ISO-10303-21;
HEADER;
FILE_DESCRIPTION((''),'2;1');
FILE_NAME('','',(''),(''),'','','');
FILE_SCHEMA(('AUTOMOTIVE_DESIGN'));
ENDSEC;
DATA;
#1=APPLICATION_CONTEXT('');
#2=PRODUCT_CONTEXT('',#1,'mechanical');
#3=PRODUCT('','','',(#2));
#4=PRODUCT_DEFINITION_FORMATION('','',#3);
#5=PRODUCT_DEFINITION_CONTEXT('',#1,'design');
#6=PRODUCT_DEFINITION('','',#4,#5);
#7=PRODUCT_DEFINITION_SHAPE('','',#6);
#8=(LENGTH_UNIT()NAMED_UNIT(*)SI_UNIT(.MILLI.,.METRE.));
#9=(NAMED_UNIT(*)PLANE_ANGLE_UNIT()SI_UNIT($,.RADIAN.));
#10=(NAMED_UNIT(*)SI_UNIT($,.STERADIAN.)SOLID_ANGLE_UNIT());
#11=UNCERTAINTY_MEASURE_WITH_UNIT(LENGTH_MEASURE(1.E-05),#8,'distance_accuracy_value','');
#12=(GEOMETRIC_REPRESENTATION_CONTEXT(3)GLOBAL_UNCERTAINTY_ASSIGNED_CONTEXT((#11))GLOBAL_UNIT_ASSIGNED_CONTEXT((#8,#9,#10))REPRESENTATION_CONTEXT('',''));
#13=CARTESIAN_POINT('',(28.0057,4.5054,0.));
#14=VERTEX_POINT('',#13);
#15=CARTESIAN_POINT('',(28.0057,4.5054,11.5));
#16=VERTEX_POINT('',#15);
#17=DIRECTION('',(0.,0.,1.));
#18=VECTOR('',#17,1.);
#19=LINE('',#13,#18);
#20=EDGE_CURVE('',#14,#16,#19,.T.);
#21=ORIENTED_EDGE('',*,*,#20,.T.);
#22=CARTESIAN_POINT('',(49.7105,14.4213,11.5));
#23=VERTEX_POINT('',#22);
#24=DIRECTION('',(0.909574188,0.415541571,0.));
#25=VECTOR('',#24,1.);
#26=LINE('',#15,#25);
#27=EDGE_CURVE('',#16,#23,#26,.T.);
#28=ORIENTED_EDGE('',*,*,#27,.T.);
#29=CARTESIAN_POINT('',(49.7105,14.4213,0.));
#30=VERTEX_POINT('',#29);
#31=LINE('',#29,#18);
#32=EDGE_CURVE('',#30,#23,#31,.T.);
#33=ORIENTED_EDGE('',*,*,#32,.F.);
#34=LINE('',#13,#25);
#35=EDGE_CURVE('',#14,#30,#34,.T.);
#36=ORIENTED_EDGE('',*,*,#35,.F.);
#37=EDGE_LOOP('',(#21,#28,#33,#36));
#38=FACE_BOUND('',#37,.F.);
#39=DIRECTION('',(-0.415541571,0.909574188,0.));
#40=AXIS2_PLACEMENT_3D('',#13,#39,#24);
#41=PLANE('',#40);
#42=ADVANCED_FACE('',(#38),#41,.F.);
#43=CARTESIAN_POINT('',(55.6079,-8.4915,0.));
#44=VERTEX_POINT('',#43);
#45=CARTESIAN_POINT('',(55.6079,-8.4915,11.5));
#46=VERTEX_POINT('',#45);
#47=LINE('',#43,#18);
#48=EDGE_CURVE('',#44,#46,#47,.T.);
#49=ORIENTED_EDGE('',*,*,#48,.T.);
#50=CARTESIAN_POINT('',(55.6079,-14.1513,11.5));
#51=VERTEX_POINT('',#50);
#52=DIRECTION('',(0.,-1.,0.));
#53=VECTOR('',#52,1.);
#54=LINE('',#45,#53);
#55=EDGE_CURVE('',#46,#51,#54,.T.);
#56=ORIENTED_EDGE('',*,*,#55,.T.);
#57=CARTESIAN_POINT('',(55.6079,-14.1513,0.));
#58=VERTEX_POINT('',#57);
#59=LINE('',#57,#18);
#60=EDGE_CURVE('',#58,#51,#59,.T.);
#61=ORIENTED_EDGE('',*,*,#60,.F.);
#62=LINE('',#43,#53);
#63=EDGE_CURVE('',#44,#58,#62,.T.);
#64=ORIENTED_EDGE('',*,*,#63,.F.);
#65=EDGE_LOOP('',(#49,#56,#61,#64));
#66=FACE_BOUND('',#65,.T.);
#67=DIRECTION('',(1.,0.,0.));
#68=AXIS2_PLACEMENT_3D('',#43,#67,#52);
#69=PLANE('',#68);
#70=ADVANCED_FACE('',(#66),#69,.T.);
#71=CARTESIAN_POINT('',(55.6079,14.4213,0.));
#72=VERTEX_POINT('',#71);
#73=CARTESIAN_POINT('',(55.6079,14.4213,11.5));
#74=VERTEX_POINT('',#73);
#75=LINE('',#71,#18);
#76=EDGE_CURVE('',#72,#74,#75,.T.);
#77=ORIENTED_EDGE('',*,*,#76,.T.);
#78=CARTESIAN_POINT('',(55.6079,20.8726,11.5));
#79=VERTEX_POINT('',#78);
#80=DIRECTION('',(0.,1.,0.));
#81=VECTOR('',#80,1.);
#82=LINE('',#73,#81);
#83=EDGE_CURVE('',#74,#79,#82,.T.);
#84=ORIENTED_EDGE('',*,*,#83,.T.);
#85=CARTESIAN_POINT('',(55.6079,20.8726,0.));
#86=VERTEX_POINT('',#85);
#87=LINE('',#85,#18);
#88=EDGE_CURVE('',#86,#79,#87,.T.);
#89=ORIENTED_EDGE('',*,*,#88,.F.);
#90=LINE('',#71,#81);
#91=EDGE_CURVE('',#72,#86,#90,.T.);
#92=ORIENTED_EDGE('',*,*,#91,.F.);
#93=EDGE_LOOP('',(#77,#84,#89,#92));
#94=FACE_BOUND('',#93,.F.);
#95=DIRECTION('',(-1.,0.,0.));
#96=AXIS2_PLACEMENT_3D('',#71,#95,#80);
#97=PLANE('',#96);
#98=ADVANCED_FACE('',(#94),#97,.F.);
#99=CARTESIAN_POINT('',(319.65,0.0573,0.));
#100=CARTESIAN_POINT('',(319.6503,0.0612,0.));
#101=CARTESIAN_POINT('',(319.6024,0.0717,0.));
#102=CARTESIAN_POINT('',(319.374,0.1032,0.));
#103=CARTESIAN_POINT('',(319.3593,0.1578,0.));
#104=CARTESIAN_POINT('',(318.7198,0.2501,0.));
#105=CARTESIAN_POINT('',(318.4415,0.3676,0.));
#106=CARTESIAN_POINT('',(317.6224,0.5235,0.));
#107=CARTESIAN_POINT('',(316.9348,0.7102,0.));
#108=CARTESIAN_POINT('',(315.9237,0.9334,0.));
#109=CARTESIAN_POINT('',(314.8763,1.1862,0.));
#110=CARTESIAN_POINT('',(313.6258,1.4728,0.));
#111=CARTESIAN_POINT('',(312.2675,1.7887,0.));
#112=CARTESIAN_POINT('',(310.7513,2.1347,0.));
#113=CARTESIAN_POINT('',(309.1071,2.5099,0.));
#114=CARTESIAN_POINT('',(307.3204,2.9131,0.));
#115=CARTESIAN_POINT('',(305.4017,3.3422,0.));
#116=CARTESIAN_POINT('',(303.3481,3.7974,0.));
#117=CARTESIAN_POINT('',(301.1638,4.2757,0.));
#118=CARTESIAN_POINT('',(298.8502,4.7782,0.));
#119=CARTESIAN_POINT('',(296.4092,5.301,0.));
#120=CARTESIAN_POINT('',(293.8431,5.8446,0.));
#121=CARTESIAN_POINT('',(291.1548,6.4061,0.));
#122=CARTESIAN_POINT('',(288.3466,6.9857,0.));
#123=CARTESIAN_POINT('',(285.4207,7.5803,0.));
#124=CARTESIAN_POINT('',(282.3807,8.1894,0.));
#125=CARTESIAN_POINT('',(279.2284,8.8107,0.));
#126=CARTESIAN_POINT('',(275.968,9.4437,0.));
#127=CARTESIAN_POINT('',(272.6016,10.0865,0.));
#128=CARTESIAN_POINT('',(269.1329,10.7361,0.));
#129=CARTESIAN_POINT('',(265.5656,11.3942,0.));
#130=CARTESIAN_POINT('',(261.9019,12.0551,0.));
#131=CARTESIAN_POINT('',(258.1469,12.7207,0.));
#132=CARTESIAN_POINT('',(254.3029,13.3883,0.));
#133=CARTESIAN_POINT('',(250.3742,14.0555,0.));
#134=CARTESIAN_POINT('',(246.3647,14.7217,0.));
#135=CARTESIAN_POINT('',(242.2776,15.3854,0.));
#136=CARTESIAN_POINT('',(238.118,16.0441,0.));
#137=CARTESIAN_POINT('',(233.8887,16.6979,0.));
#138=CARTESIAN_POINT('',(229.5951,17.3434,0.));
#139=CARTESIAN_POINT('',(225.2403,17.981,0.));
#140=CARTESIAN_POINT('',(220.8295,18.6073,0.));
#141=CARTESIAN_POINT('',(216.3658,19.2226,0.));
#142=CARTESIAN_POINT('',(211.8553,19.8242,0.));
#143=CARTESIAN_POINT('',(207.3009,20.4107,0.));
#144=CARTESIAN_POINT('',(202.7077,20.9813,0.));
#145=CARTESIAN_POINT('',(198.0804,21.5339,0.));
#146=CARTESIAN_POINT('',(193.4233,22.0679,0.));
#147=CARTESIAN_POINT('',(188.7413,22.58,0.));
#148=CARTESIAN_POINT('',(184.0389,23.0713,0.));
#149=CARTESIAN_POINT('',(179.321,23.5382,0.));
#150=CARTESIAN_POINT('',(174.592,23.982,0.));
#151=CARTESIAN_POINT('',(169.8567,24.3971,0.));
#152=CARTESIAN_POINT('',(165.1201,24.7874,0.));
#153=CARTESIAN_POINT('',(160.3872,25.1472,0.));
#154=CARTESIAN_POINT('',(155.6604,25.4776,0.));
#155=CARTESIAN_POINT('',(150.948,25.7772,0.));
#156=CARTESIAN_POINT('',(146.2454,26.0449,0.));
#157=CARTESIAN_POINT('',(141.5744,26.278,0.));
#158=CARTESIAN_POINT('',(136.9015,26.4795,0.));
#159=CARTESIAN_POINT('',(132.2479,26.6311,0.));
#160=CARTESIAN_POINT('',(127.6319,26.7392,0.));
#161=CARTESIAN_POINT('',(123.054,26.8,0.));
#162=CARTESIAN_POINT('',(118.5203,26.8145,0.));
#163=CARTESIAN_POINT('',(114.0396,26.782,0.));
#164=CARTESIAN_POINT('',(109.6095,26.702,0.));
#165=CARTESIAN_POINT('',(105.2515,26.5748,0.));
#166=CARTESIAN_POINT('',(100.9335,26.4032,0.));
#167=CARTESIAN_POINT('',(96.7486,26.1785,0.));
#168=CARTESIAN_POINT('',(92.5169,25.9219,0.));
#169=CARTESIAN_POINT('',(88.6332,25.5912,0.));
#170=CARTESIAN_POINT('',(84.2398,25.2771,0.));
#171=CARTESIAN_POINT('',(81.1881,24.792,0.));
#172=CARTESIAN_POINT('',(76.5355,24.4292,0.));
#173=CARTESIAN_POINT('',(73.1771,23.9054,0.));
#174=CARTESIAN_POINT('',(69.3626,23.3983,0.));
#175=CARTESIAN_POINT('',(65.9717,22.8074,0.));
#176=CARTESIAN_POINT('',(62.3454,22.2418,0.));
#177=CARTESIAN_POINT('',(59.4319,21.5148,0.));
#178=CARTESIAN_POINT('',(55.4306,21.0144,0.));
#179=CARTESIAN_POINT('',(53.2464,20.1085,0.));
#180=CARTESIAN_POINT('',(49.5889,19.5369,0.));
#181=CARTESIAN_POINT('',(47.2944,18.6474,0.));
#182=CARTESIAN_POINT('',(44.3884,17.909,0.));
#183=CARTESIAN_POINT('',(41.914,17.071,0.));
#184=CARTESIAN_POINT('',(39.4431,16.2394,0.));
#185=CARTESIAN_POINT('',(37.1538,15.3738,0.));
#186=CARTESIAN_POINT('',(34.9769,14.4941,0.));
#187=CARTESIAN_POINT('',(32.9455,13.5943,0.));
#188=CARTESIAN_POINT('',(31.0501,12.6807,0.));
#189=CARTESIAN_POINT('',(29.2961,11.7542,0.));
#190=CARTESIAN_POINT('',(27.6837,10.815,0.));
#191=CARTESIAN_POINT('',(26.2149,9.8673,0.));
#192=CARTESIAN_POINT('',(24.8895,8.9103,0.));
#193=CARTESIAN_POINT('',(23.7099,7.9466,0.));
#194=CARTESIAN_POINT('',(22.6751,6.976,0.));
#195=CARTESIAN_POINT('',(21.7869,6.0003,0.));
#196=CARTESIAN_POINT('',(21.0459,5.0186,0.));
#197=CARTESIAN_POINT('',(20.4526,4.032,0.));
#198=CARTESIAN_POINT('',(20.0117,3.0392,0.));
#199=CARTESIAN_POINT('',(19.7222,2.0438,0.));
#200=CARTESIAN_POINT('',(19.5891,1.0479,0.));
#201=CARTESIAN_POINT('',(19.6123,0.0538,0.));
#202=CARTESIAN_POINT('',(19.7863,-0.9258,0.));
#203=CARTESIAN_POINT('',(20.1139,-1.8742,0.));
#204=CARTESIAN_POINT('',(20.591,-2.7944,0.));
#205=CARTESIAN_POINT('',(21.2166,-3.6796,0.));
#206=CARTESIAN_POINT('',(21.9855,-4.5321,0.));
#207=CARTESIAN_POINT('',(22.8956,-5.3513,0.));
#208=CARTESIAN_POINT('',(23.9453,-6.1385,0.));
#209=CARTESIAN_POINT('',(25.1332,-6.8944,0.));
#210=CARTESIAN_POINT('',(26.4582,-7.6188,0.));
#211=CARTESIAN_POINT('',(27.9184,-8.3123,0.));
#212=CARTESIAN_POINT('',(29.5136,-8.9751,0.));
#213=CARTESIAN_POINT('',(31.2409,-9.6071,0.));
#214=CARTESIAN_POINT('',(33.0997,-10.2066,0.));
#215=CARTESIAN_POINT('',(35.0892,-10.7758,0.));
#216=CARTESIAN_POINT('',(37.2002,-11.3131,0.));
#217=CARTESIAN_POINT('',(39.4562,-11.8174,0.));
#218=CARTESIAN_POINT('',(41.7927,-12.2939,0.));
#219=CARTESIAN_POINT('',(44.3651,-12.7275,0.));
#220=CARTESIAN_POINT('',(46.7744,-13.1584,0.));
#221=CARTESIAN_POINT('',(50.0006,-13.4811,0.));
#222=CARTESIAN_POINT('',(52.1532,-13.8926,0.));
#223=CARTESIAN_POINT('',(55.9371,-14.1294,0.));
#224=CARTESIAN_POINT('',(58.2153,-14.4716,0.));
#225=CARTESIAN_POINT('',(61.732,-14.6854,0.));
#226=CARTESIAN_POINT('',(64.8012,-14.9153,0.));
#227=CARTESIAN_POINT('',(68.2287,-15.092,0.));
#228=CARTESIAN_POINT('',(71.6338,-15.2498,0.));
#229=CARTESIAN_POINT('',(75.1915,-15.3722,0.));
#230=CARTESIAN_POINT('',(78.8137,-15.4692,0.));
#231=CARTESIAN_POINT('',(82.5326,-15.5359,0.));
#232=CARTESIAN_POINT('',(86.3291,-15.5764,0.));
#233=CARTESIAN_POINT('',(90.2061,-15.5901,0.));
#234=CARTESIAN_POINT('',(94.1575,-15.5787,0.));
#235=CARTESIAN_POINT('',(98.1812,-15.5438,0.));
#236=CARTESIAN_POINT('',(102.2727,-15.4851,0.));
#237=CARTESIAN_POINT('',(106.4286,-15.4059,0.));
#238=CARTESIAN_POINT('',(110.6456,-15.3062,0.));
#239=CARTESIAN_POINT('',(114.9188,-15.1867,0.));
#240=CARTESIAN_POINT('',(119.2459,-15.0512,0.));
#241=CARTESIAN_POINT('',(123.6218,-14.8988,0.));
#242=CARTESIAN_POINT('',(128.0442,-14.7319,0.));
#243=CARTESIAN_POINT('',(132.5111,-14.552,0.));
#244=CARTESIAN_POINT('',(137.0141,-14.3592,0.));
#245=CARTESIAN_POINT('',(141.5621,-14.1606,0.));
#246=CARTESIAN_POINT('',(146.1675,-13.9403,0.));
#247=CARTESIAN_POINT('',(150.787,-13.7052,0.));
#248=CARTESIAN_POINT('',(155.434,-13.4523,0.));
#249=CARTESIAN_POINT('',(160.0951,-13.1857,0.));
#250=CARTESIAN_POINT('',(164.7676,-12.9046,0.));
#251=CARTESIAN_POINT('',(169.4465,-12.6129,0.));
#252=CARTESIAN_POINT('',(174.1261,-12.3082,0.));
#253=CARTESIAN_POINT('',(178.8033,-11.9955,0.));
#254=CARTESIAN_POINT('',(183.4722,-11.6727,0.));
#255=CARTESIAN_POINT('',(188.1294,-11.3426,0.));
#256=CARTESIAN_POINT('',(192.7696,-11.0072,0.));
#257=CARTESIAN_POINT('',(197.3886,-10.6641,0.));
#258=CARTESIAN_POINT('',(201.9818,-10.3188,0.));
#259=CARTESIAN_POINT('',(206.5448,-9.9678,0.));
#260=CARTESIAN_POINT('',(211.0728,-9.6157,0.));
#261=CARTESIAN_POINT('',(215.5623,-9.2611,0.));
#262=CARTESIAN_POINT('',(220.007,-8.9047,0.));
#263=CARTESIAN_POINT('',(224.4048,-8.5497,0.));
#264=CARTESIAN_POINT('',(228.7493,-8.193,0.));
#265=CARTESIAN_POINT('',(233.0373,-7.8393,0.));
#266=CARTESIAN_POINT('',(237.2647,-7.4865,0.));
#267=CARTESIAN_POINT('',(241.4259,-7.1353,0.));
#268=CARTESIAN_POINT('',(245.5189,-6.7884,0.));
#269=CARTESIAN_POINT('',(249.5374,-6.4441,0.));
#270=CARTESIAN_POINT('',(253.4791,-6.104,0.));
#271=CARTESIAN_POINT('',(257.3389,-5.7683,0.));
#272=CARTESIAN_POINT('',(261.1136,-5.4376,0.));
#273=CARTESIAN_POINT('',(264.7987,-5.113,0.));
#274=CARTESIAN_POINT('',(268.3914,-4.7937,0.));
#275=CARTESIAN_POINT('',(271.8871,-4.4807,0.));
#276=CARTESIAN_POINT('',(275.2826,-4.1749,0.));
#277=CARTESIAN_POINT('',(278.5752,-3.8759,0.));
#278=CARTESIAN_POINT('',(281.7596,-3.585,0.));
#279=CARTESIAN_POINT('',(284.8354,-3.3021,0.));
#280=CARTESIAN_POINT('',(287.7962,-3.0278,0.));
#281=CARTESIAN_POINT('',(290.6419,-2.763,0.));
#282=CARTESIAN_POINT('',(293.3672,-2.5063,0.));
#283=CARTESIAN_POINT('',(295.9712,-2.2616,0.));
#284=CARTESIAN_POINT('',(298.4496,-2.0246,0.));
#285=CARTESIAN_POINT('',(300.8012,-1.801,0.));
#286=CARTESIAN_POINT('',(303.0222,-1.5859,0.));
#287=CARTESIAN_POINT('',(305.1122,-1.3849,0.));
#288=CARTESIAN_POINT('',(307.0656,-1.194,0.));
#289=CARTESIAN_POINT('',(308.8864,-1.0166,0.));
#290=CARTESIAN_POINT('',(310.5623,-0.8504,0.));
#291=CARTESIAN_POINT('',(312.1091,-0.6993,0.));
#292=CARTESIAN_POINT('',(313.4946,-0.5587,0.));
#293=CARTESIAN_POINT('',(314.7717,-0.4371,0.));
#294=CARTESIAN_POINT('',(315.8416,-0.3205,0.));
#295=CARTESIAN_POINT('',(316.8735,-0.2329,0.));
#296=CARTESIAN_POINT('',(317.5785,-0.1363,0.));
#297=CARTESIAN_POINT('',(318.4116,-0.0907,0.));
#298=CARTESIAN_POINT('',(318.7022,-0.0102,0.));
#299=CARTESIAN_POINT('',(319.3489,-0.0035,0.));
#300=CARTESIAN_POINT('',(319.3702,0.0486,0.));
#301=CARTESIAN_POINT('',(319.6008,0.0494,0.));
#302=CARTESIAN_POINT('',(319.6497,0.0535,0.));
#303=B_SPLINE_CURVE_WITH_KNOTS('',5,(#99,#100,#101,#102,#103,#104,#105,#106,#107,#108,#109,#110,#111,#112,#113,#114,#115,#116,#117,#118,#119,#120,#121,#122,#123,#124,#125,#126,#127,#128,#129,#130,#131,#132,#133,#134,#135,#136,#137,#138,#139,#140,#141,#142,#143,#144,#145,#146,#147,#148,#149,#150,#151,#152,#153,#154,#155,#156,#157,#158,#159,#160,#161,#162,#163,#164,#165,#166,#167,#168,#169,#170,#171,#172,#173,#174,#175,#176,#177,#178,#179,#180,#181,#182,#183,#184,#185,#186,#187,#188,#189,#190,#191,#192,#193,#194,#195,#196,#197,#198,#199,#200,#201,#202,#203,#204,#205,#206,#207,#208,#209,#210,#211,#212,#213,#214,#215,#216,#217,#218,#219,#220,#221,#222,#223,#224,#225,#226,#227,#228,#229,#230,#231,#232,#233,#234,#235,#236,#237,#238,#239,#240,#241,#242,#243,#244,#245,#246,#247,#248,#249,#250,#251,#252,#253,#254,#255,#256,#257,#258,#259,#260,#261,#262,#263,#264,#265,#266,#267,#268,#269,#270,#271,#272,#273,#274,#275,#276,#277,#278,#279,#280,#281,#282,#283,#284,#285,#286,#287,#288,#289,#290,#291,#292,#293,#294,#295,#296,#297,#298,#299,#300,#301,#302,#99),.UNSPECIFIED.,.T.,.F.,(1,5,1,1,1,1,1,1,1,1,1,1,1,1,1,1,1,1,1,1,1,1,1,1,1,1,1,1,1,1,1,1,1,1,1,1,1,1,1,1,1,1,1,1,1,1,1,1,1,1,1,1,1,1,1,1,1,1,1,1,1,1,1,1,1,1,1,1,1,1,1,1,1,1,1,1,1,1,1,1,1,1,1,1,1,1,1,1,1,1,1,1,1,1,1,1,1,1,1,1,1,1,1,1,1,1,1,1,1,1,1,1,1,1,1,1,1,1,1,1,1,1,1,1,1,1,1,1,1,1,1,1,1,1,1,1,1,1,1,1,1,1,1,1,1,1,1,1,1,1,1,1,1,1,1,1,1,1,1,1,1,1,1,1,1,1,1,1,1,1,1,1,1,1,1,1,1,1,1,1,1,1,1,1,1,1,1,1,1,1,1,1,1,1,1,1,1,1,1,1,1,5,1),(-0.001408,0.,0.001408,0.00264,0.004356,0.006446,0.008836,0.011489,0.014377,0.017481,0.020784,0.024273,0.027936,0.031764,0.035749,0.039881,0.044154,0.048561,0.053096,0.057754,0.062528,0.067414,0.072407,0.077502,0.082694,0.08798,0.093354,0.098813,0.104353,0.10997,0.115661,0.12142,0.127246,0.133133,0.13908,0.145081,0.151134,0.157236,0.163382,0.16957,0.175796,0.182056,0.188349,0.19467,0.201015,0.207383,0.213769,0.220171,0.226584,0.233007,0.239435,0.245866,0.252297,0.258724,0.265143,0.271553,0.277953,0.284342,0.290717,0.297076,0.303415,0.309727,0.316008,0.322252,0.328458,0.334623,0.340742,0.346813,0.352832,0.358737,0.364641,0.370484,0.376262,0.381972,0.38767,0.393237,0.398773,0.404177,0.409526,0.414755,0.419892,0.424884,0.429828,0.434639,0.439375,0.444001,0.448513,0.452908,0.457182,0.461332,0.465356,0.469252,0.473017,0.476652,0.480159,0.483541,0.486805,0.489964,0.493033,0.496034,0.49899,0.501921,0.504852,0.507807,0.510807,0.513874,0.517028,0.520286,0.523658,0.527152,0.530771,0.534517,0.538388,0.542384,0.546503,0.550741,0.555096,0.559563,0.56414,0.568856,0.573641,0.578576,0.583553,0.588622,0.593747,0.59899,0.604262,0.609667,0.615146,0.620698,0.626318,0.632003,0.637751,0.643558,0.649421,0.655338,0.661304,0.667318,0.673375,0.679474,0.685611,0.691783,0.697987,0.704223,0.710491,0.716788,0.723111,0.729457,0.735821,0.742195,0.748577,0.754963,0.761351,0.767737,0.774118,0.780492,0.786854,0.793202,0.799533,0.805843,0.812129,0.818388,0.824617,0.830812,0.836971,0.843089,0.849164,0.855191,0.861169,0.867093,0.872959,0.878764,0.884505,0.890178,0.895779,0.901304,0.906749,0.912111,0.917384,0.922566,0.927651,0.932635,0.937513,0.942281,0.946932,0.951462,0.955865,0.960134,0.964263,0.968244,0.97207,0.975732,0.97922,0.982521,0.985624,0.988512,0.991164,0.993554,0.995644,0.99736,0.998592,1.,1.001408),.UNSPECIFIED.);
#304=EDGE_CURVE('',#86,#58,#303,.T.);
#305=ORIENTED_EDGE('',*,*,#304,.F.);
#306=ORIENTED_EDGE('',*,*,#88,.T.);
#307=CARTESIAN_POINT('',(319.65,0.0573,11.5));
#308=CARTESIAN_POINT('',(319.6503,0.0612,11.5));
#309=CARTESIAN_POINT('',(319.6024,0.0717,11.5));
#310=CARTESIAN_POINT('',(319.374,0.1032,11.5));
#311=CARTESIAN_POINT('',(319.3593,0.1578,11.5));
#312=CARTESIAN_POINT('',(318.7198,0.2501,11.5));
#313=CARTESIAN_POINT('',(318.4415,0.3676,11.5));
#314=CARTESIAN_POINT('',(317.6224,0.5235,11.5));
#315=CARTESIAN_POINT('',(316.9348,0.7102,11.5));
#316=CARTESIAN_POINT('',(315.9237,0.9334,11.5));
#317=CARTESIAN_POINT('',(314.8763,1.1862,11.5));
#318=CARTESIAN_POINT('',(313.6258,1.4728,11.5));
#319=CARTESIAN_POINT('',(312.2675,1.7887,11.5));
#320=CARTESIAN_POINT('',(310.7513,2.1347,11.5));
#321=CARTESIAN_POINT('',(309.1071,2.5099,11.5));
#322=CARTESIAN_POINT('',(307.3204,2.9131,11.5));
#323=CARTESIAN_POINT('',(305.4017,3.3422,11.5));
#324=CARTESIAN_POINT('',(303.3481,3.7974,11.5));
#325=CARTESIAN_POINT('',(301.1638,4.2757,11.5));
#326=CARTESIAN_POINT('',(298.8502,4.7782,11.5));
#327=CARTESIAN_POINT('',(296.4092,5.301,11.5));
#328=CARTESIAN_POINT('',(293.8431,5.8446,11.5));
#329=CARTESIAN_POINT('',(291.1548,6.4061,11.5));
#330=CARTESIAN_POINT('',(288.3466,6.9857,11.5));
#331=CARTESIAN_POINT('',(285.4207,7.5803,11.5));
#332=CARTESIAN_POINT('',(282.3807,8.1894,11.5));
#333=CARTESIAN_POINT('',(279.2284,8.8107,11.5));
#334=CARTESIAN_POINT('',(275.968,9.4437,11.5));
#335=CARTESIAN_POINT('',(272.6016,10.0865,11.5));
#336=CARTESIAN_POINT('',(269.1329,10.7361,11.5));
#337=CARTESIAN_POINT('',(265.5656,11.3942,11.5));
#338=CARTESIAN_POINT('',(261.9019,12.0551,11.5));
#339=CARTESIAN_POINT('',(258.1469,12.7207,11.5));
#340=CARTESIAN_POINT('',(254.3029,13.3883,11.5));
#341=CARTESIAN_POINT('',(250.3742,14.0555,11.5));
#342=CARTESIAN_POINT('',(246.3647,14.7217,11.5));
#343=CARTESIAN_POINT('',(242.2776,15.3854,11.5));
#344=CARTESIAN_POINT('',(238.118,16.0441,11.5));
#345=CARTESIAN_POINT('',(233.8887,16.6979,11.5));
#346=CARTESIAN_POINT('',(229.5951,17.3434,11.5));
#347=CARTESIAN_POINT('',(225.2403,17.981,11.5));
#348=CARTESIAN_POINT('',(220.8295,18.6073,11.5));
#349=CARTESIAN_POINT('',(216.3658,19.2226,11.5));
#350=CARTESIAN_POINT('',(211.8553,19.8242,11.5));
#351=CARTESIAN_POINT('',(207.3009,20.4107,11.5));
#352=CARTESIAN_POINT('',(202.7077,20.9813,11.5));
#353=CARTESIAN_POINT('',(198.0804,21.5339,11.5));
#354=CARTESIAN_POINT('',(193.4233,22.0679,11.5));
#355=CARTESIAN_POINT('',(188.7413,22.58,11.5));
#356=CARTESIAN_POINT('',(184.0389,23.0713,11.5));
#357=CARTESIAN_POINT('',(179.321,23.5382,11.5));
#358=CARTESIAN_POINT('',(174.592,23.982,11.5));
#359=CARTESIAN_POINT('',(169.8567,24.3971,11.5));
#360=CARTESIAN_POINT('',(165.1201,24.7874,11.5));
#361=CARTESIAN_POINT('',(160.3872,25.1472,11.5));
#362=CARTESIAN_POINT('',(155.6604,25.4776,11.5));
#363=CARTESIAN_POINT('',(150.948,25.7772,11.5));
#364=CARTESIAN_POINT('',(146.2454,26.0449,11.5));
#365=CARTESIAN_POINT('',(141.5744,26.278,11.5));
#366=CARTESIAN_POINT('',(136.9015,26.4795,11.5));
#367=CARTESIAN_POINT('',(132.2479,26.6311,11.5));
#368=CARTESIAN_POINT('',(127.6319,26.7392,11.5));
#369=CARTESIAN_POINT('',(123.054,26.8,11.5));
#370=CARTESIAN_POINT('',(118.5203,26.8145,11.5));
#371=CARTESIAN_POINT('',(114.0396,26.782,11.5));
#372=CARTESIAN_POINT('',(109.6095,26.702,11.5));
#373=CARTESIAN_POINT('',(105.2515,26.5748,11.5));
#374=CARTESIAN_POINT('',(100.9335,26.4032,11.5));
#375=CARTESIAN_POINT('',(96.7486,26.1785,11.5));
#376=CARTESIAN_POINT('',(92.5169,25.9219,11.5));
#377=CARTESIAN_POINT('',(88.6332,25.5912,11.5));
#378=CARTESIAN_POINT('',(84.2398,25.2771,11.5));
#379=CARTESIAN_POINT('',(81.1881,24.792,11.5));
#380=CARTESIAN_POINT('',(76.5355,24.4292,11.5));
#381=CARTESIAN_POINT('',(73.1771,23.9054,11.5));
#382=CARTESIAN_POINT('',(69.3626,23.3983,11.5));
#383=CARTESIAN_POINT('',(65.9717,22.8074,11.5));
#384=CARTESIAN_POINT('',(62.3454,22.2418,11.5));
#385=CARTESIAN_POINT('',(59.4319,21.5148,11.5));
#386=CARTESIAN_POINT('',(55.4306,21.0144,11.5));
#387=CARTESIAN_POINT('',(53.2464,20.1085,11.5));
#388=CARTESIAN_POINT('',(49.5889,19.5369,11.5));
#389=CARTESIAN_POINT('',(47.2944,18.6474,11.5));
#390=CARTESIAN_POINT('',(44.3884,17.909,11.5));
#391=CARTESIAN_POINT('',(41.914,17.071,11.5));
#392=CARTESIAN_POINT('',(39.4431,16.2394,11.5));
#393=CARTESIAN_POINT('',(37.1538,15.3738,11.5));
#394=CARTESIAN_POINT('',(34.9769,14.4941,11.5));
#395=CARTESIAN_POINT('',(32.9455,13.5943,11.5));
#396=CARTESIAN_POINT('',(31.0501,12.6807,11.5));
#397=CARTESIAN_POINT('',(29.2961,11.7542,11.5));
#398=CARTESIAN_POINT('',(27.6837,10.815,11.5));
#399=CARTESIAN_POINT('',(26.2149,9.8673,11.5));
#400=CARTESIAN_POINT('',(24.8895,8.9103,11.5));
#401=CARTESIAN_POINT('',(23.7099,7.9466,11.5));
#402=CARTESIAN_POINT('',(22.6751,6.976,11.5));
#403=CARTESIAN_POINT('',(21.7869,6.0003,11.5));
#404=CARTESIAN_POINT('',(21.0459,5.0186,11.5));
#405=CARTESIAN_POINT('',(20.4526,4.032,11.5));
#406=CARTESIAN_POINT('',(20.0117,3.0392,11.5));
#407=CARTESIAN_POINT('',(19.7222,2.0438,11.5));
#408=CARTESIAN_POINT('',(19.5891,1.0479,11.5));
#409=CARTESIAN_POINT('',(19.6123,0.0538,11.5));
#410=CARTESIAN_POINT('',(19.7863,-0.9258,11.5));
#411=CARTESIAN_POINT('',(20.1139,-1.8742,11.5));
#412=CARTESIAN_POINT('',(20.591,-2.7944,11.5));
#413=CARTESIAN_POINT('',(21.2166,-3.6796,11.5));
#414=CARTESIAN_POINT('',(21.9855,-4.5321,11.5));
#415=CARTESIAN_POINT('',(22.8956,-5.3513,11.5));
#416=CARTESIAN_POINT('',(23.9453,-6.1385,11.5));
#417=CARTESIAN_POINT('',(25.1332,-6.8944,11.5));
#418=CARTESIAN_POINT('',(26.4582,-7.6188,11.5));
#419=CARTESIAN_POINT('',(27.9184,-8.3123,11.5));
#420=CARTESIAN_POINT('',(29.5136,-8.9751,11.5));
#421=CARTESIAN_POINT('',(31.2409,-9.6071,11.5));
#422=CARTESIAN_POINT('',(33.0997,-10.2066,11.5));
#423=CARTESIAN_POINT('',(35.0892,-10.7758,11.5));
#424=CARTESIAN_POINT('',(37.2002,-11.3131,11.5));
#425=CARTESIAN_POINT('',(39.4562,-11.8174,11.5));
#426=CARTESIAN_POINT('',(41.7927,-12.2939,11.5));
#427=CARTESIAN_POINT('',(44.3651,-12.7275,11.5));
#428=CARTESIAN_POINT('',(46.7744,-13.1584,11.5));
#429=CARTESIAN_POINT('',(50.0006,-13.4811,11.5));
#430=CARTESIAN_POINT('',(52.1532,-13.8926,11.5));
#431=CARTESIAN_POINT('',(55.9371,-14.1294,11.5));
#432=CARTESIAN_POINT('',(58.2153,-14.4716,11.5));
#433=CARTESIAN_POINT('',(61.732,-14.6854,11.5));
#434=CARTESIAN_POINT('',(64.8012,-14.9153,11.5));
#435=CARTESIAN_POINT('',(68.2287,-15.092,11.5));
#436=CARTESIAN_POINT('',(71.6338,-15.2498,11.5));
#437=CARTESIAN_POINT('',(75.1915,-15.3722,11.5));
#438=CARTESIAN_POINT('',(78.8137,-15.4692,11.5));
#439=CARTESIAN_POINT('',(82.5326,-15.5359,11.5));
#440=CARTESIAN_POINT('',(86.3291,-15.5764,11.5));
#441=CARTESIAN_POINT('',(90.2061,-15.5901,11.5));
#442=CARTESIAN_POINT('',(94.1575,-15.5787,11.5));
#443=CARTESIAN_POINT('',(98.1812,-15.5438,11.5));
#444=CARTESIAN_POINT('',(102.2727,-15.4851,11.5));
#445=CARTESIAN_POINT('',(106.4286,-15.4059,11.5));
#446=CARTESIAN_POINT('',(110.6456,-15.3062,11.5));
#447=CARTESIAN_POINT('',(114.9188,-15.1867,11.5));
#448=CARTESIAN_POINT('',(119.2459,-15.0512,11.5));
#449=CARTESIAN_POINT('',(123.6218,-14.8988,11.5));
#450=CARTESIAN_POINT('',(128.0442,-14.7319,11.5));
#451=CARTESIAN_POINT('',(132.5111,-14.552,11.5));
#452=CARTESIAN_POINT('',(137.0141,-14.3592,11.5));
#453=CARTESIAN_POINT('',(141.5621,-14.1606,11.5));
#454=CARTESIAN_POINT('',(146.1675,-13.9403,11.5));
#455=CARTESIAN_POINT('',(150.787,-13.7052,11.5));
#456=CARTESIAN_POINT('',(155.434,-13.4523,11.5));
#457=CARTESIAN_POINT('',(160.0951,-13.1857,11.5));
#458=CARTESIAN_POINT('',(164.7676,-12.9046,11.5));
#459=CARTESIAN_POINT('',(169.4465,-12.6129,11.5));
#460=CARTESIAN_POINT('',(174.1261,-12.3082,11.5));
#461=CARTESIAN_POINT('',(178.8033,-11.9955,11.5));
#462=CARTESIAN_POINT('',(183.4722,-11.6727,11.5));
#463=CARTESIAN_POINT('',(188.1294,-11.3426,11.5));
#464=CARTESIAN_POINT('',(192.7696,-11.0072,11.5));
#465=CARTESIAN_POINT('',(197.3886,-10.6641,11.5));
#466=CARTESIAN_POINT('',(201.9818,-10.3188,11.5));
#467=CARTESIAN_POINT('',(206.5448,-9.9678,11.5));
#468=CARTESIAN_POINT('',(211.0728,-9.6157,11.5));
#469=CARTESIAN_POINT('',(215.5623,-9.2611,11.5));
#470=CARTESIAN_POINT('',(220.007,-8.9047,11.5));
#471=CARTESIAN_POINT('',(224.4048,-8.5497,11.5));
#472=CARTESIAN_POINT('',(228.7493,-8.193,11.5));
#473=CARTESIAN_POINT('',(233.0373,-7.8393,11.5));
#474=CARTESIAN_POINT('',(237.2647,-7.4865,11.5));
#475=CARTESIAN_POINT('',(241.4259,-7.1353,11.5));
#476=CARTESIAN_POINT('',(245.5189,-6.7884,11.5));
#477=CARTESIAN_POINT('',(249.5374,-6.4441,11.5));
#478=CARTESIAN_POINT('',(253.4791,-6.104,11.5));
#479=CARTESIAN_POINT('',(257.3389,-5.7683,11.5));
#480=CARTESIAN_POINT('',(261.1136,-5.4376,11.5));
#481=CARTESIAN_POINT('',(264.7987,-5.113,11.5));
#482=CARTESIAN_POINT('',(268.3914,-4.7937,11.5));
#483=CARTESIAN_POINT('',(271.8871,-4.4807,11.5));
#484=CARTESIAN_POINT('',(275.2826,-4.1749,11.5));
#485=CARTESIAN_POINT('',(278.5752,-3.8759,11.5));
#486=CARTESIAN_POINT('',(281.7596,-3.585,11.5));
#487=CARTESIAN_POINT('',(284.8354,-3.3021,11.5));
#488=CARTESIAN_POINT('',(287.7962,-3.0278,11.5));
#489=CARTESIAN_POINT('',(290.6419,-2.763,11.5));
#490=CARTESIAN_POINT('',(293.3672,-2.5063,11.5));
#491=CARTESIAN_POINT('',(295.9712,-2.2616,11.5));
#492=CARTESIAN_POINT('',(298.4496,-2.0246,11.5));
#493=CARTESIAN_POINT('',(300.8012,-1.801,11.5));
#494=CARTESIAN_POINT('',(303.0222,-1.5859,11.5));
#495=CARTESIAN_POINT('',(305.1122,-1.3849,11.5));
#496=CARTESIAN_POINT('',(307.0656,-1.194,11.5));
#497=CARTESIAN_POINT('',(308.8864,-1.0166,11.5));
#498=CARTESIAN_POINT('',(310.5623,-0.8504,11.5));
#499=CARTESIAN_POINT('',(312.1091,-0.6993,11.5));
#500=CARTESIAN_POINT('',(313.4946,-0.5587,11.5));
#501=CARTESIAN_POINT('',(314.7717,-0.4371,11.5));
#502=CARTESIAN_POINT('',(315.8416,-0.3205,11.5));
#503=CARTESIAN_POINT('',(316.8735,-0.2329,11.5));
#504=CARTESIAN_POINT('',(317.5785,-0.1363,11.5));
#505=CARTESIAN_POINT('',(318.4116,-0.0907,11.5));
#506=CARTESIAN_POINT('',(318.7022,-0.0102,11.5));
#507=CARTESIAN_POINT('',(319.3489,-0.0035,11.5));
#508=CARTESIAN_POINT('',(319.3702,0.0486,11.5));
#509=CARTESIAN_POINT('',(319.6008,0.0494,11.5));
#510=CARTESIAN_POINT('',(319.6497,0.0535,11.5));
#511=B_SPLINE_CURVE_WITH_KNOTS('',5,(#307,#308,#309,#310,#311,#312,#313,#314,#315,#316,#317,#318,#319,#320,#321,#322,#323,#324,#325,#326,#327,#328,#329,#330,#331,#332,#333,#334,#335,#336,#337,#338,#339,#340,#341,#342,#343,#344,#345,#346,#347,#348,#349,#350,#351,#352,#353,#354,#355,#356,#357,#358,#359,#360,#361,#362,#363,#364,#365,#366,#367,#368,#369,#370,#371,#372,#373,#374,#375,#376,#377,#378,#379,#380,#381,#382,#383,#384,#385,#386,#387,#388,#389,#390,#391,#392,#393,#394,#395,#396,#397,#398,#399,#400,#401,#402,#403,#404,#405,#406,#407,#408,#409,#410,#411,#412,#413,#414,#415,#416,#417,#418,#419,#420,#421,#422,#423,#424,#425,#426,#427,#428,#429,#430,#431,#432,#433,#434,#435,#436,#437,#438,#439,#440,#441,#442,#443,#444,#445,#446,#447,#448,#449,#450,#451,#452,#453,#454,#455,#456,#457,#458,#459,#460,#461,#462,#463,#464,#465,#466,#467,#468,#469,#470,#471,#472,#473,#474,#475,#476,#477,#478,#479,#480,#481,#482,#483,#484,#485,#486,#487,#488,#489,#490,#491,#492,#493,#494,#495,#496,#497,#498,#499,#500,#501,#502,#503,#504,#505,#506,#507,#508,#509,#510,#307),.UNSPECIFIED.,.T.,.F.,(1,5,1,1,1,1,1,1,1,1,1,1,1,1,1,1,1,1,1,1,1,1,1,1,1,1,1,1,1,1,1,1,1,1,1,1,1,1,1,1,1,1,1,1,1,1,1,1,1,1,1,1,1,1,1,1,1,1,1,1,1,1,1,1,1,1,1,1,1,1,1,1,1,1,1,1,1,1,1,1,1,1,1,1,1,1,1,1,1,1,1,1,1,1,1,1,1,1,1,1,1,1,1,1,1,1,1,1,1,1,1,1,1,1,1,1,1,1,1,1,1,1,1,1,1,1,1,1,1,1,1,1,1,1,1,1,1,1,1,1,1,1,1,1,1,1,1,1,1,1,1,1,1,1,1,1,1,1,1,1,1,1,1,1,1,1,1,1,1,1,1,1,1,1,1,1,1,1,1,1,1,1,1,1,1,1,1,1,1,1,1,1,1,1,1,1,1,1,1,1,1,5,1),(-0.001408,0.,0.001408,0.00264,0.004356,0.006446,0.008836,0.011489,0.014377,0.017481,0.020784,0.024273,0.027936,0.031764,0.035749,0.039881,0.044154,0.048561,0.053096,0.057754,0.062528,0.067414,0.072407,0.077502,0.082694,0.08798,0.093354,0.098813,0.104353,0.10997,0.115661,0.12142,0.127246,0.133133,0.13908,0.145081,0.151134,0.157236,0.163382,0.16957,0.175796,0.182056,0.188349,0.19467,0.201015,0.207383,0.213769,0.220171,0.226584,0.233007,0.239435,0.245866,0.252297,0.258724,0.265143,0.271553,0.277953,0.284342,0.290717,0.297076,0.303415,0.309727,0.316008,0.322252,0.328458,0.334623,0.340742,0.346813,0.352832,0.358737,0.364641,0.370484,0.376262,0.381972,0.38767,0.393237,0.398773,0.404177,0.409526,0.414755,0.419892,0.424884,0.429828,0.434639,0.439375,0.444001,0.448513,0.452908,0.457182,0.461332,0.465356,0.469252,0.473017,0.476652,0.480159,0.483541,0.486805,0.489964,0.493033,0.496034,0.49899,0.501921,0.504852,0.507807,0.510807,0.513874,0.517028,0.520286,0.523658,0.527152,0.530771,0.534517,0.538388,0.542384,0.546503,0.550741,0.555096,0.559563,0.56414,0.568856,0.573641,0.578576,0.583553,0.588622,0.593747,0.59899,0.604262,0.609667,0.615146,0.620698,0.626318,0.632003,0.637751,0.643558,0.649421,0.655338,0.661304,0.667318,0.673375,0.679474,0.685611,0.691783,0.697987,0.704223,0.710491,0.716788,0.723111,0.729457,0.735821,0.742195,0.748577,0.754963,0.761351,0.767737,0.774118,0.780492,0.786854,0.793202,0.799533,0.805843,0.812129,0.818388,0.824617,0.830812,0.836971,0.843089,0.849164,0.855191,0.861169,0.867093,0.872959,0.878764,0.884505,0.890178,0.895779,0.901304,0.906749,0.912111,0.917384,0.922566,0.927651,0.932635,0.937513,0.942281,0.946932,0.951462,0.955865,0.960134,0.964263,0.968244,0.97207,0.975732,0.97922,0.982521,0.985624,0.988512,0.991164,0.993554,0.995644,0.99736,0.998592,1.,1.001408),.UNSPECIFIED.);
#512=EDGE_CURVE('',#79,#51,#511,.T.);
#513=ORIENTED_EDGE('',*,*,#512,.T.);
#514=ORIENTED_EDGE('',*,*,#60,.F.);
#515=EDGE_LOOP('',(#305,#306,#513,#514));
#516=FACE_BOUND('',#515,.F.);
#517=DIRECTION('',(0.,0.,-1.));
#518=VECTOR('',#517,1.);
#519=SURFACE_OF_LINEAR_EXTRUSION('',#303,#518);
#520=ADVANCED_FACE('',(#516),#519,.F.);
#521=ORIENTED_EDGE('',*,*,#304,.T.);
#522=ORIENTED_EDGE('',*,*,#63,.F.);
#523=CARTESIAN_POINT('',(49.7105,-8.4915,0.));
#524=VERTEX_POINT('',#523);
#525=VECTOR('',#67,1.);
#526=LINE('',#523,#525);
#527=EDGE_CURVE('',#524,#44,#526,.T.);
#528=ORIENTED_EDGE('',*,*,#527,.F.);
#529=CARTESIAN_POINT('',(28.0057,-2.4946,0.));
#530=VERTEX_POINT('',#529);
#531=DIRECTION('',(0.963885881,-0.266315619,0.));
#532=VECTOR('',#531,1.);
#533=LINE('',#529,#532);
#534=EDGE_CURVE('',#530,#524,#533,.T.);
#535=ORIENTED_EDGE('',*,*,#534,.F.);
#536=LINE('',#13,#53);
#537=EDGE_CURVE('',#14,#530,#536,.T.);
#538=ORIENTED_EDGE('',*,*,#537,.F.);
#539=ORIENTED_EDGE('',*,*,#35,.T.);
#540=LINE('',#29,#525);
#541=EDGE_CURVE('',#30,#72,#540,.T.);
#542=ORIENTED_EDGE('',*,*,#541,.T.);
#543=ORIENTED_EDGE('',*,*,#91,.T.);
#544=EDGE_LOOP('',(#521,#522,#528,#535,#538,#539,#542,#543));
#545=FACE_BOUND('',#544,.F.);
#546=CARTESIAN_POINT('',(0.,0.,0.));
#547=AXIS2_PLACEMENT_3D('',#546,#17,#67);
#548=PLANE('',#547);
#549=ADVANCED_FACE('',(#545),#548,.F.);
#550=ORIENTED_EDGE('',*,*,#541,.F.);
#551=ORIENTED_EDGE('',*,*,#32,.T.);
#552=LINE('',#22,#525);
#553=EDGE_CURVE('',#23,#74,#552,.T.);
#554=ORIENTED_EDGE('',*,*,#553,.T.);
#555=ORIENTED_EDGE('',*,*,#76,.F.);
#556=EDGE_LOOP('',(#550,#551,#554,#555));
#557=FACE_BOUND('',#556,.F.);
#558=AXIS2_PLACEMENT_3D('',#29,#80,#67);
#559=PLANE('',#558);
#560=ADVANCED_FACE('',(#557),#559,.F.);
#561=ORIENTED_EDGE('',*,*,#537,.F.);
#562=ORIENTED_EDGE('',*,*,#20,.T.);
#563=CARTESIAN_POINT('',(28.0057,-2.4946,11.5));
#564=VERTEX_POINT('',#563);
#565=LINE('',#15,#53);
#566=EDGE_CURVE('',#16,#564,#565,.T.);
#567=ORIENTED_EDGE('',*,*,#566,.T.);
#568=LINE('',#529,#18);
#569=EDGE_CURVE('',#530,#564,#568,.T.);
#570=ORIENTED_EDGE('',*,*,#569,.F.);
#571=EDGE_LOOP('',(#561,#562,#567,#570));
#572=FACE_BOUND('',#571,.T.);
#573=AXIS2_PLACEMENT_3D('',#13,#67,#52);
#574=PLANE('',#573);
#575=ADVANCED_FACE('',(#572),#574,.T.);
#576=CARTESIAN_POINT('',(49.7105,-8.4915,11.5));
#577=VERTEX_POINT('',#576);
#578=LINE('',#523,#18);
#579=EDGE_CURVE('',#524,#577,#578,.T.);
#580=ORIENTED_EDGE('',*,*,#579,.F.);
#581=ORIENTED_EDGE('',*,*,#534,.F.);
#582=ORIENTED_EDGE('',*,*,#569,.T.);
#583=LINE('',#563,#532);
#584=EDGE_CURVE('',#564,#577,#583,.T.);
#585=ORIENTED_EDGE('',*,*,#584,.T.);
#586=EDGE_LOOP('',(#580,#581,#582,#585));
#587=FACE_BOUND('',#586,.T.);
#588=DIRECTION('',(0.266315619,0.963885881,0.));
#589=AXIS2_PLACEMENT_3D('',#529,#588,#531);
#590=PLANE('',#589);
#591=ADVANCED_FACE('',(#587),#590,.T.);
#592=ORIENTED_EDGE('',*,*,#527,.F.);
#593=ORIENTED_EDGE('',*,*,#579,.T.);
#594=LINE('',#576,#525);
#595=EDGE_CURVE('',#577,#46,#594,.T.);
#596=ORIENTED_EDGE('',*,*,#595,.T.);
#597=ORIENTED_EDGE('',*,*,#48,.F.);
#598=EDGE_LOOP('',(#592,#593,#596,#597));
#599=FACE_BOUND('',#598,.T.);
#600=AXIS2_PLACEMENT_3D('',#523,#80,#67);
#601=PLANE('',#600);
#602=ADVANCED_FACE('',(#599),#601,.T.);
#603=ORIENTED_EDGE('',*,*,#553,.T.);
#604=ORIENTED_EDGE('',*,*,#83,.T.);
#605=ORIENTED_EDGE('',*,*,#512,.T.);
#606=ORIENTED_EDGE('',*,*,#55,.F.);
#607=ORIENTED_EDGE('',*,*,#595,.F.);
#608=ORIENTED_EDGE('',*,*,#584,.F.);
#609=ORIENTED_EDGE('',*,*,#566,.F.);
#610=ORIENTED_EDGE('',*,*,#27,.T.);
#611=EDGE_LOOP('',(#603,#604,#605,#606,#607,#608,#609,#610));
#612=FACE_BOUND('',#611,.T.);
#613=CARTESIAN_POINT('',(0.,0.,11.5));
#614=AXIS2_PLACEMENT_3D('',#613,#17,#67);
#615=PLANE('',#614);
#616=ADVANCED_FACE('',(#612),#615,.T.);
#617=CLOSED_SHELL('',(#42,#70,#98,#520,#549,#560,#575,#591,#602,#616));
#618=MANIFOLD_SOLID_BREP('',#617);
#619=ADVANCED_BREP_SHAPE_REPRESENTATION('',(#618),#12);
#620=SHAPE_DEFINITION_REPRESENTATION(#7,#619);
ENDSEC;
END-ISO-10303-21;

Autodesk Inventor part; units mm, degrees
ref_plane "YZ Plane" through (0, 0, 0) normal (1, 0, 0) x (0, 1, 0)
ref_plane "XZ Plane" through (0, 0, 0) normal (0, 1, 0) x (-1, 0, 0)
ref_plane "XY Plane" through (0, 0, 0) normal (0, 0, 1) x (1, 0, 0)
sketch "Sketch2" plane through (0, 0, 0) normal (0, 0, 1) x (1, 0, 0)
  spline S0 degree 5 poles (319.65, 0.0573) (319.6503, 0.0612) (319.6024, 0.0717) (319.374, 0.1032) (319.3593, 0.1578) (318.7198, 0.2501) (318.4415, 0.3676) (317.6224, 0.5235) (316.9348, 0.7102) (315.9237, 0.9334) (314.8763, 1.1862) (313.6258, 1.4728) (312.2675, 1.7887) (310.7513, 2.1347) (309.1071, 2.5099) (307.3204, 2.9131) (305.4017, 3.3422) (303.3481, 3.7974) (301.1638, 4.2757) (298.8502, 4.7782) (296.4092, 5.301) (293.8431, 5.8446) (291.1548, 6.4061) (288.3466, 6.9857) (285.4207, 7.5803) (282.3807, 8.1894) (279.2284, 8.8107) (275.968, 9.4437) (272.6016, 10.0865) (269.1329, 10.7361) (265.5656, 11.3942) (261.9019, 12.0551) (258.1469, 12.7207) (254.3029, 13.3883) (250.3742, 14.0555) (246.3647, 14.7217) (242.2776, 15.3854) (238.118, 16.0441) (233.8887, 16.6979) (229.5951, 17.3434) (225.2403, 17.981) (220.8295, 18.6073) (216.3658, 19.2226) (211.8553, 19.8242) (207.3009, 20.4107) (202.7077, 20.9813) (198.0804, 21.5339) (193.4233, 22.0679) (188.7413, 22.58) (184.0389, 23.0713) (179.321, 23.5382) (174.592, 23.982) (169.8567, 24.3971) (165.1201, 24.7874) (160.3872, 25.1472) (155.6604, 25.4776) (150.948, 25.7772) (146.2454, 26.0449) (141.5744, 26.278) (136.9015, 26.4795) (132.2479, 26.6311) (127.6319, 26.7392) (123.054, 26.8) (118.5203, 26.8145) (114.0396, 26.782) (109.6095, 26.702) (105.2515, 26.5748) (100.9335, 26.4032) (96.7486, 26.1785) (92.5169, 25.9219) (88.6332, 25.5912) (84.2398, 25.2771) (81.1881, 24.792) (76.5355, 24.4292) (73.1771, 23.9054) (69.3626, 23.3983) (65.9717, 22.8074) (62.3454, 22.2418) (59.4319, 21.5148) (55.4306, 21.0144) (53.2464, 20.1085) (49.5889, 19.5369) (47.2944, 18.6474) (44.3884, 17.909) (41.914, 17.071) (39.4431, 16.2394) (37.1538, 15.3738) (34.9769, 14.4941) (32.9455, 13.5943) (31.0501, 12.6807) (29.2961, 11.7542) (27.6837, 10.815) (26.2149, 9.8673) (24.8895, 8.9103) (23.7099, 7.9466) (22.6751, 6.976) (21.7869, 6.0003) (21.0459, 5.0186) (20.4526, 4.032) (20.0117, 3.0392) (19.7222, 2.0438) (19.5891, 1.0479) (19.6123, 0.0538) (19.7863, -0.9258) (20.1139, -1.8742) (20.591, -2.7944) (21.2166, -3.6796) (21.9855, -4.5321) (22.8956, -5.3513) (23.9453, -6.1385) (25.1332, -6.8944) (26.4582, -7.6188) (27.9184, -8.3123) (29.5136, -8.9751) (31.2409, -9.6071) (33.0997, -10.2066) (35.0892, -10.7758) (37.2002, -11.3131) (39.4562, -11.8174) (41.7927, -12.2939) (44.3651, -12.7275) (46.7744, -13.1584) (50.0006, -13.4811) (52.1532, -13.8926) (55.9371, -14.1294) (58.2153, -14.4716) (61.732, -14.6854) (64.8012, -14.9153) (68.2287, -15.092) (71.6338, -15.2498) (75.1915, -15.3722) (78.8137, -15.4692) (82.5326, -15.5359) (86.3291, -15.5764) (90.2061, -15.5901) (94.1575, -15.5787) (98.1812, -15.5438) (102.2727, -15.4851) (106.4286, -15.4059) (110.6456, -15.3062) (114.9188, -15.1867) (119.2459, -15.0512) (123.6218, -14.8988) (128.0442, -14.7319) (132.5111, -14.552) (137.0141, -14.3592) (141.5621, -14.1606) (146.1675, -13.9403) (150.787, -13.7052) (155.434, -13.4523) (160.0951, -13.1857) (164.7676, -12.9046) (169.4465, -12.6129) (174.1261, -12.3082) (178.8033, -11.9955) (183.4722, -11.6727) (188.1294, -11.3426) (192.7696, -11.0072) (197.3886, -10.6641) (201.9818, -10.3188) (206.5448, -9.9678) (211.0728, -9.6157) (215.5623, -9.2611) (220.007, -8.9047) (224.4048, -8.5497) (228.7493, -8.193) (233.0373, -7.8393) (237.2647, -7.4865) (241.4259, -7.1353) (245.5189, -6.7884) (249.5374, -6.4441) (253.4791, -6.104) (257.3389, -5.7683) (261.1136, -5.4376) (264.7987, -5.113) (268.3914, -4.7937) (271.8871, -4.4807) (275.2826, -4.1749) (278.5752, -3.8759) (281.7596, -3.585) (284.8354, -3.3021) (287.7962, -3.0278) (290.6419, -2.763) (293.3672, -2.5063) (295.9712, -2.2616) (298.4496, -2.0246) (300.8012, -1.801) (303.0222, -1.5859) (305.1122, -1.3849) (307.0656, -1.194) (308.8864, -1.0166) (310.5623, -0.8504) (312.1091, -0.6993) (313.4946, -0.5587) (314.7717, -0.4371) (315.8416, -0.3205) (316.8735, -0.2329) (317.5785, -0.1363) (318.4116, -0.0907) (318.7022, -0.0102) (319.3489, -0.0035) (319.3702, 0.0486) (319.6008, 0.0494) (319.6497, 0.0535) (319.65, 0.0573) knots 0 0 0 0 0 0 0.001408 0.00264 0.004356 0.006446 0.008836 0.011489 0.014377 0.017481 0.020784 0.024273 0.027936 0.031764 0.035749 0.039881 0.044154 0.048561 0.053096 0.057754 0.062528 0.067414 0.072407 0.077502 0.082694 0.08798 0.093354 0.098813 0.104353 0.10997 0.115661 0.12142 0.127246 0.133133 0.13908 0.145081 0.151134 0.157236 0.163382 0.16957 0.175796 0.182056 0.188349 0.19467 0.201015 0.207383 0.213769 0.220171 0.226584 0.233007 0.239435 0.245866 0.252297 0.258724 0.265143 0.271553 0.277953 0.284342 0.290717 0.297076 0.303415 0.309727 0.316008 0.322252 0.328458 0.334623 0.340742 0.346813 0.352832 0.358737 0.364641 0.370484 0.376262 0.381972 0.38767 0.393237 0.398773 0.404177 0.409526 0.414755 0.419892 0.424884 0.429828 0.434639 0.439375 0.444001 0.448513 0.452908 0.457182 0.461332 0.465356 0.469252 0.473017 0.476652 0.480159 0.483541 0.486805 0.489964 0.493033 0.496034 0.49899 0.501921 0.504852 0.507807 0.510807 0.513874 0.517028 0.520286 0.523658 0.527152 0.530771 0.534517 0.538388 0.542384 0.546503 0.550741 0.555096 0.559563 0.56414 0.568856 0.573641 0.578576 0.583553 0.588622 0.593747 0.59899 0.604262 0.609667 0.615146 0.620698 0.626318 0.632003 0.637751 0.643558 0.649421 0.655338 0.661304 0.667318 0.673375 0.679474 0.685611 0.691783 0.697987 0.704223 0.710491 0.716788 0.723111 0.729457 0.735821 0.742195 0.748577 0.754963 0.761351 0.767737 0.774118 0.780492 0.786854 0.793202 0.799533 0.805843 0.812129 0.818388 0.824617 0.830812 0.836971 0.843089 0.849164 0.855191 0.861169 0.867093 0.872959 0.878764 0.884505 0.890178 0.895779 0.901304 0.906749 0.912111 0.917384 0.922566 0.927651 0.932635 0.937513 0.942281 0.946932 0.951462 0.955865 0.960134 0.964263 0.968244 0.97207 0.975732 0.97922 0.982521 0.985624 0.988512 0.991164 0.993554 0.995644 0.99736 0.998592 1 1 1 1 1 1
  circle A0 centre (80.6499, 4.6494) radius 14
  line L0 (80.6499, 4.6494) -> (80.6499, 24.7974) construction
  circle A1 centre (209.65, 4.6494) radius 4.2
  line L1 (80.6499, 4.6494) -> (209.65, 4.6494) construction
  line L2 (319.65, 0.0573) -> (219.65, 0.0573) construction
  line L3 (219.65, 18.7671) -> (219.65, -8.9327) construction
  line L4 (28.0057, 4.5054) -> (28.0057, -2.4946)
  line L5 (19.6271, 1.0326) -> (319.65, 0.0573) construction
  line L6 (49.7105, 14.4213) -> (55.6079, 14.4213)
  line L7 (49.7105, -8.4915) -> (55.6079, -8.4915)
  line L8 (28.0057, 4.5054) -> (49.7105, 14.4213)
  line L9 (28.0057, -2.4946) -> (49.7105, -8.4915)
  line L10 (55.6079, 14.4213) -> (55.6079, 20.8726)
  line L11 (55.6079, -8.4915) -> (55.6079, -14.1513)
  point P0 (0, 0)
  point P1 (319.3571, 0.1272)
  point P2 (318.9917, 0.2142)
  point P3 (318.4802, 0.3354)
  point P4 (317.8238, 0.4911)
  point P5 (317.0222, 0.6801)
  point P6 (316.0769, 0.9024)
  point P7 (314.9885, 1.1568)
  point P8 (313.7582, 1.443)
  point P9 (312.3866, 1.7598)
  point P10 (310.8752, 2.1063)
  point P11 (309.2258, 2.4819)
  point P12 (307.4393, 2.8854)
  point P13 (305.5178, 3.3153)
  point P14 (303.4628, 3.7707)
  point P15 (301.2764, 4.2501)
  point P16 (298.9607, 4.7526)
  point P17 (296.5175, 5.2764)
  point P18 (293.9492, 5.8203)
  point P19 (291.2585, 6.3828)
  point P20 (288.4478, 6.9627)
  point P21 (285.5195, 7.5582)
  point P22 (282.4766, 8.1678)
  point P23 (279.3218, 8.79)
  point P24 (276.0584, 9.4236)
  point P25 (272.6891, 10.0668)
  point P26 (269.2175, 10.7178)
  point P27 (265.6469, 11.3757)
  point P28 (261.9803, 12.0381)
  point P29 (258.2219, 12.7041)
  point P30 (254.3747, 13.3722)
  point P31 (250.4426, 14.0403)
  point P32 (246.4295, 14.7072)
  point P33 (242.339, 15.3714)
  point P34 (238.1756, 16.0311)
  point P35 (233.9429, 16.6851)
  point P36 (229.6454, 17.3316)
  point P37 (225.287, 17.9694)
  point P38 (220.8722, 18.5967)
  point P39 (216.4049, 19.2123)
  point P40 (211.8902, 19.8144)
  point P41 (207.332, 20.4015)
  point P42 (202.7348, 20.9724)
  point P43 (198.1034, 21.5256)
  point P44 (193.4423, 22.0596)
  point P45 (188.7563, 22.5726)
  point P46 (184.0499, 23.0637)
  point P47 (179.3279, 23.5314)
  point P48 (174.5948, 23.9745)
  point P49 (169.8554, 24.3909)
  point P50 (165.1148, 24.7803)
  point P51 (160.3775, 25.1406)
  point P52 (155.648, 25.4709)
  point P53 (150.9317, 25.7703)
  point P54 (146.2331, 26.0373)
  point P55 (141.557, 26.2707)
  point P56 (136.8821, 26.4681)
  point P57 (132.221, 26.6211)
  point P58 (127.5965, 26.7282)
  point P59 (123.0134, 26.7888)
  point P60 (118.4762, 26.8026)
  point P61 (113.9903, 26.7693)
  point P62 (109.5602, 26.6886)
  point P63 (105.191, 26.5611)
  point P64 (100.8866, 26.3865)
  point P65 (96.6524, 26.1648)
  point P66 (92.4926, 25.8972)
  point P67 (88.4117, 25.5837)
  point P68 (84.4142, 25.2255)
  point P69 (80.8999, 24.8247)
  point P70 (76.6859, 24.3774)
  point P71 (72.9632, 23.8899)
  point P72 (69.3401, 23.3613)
  point P73 (65.8208, 22.7937)
  point P74 (62.4086, 22.1883)
  point P75 (59.1071, 21.5463)
  point P76 (52.8494, 20.1606)
  point P77 (49.7105, 19.4213)
  point P78 (47.0738, 18.6507)
  point P79 (44.3741, 17.8542)
  point P80 (41.8034, 17.0322)
  point P81 (39.3638, 16.1874)
  point P82 (37.0583, 15.3213)
  point P83 (34.8884, 14.4363)
  point P84 (32.8568, 13.5339)
  point P85 (30.965, 12.6165)
  point P86 (29.2145, 11.6859)
  point P87 (27.6071, 10.7436)
  point P88 (26.1443, 9.792)
  point P89 (24.827, 8.8323)
  point P90 (23.6567, 7.8663)
  point P91 (22.6337, 6.8952)
  point P92 (21.7592, 5.9208)
  point P93 (21.0335, 4.944)
  point P94 (20.4572, 3.966)
  point P95 (20.0309, 2.9874)
  point P96 (19.754, 2.0097)
  point P97 (19.6499, 0.0573)
  point P98 (19.8206, -0.9033)
  point P99 (20.1377, -1.8357)
  point P100 (20.6003, -2.7402)
  point P101 (21.2081, -3.6159)
  point P102 (21.9599, -4.4628)
  point P103 (22.8545, -5.2806)
  point P104 (23.891, -6.069)
  point P105 (25.0682, -6.8277)
  point P106 (26.3846, -7.5561)
  point P107 (27.8384, -8.2539)
  point P108 (29.4284, -8.9211)
  point P109 (31.1522, -9.5571)
  point P110 (33.0086, -10.1613)
  point P111 (34.9949, -10.734)
  point P112 (37.1093, -11.2746)
  point P113 (39.3497, -11.7828)
  point P114 (41.7134, -12.2586)
  point P115 (44.198, -12.702)
  point P116 (46.8014, -13.1127)
  point P117 (49.7105, -13.4915)
  point P118 (52.3532, -13.8357)
  point P119 (58.3469, -14.4294)
  point P120 (61.5023, -14.6781)
  point P121 (64.7591, -14.8953)
  point P122 (68.1149, -15.0813)
  point P123 (71.5661, -15.237)
  point P124 (75.1094, -15.3627)
  point P125 (78.7418, -15.4596)
  point P126 (82.46, -15.528)
  point P127 (86.2607, -15.5691)
  point P128 (90.14, -15.5838)
  point P129 (94.0946, -15.5733)
  point P130 (98.1212, -15.5388)
  point P131 (102.2159, -15.4812)
  point P132 (106.3751, -15.4023)
  point P133 (110.5952, -15.303)
  point P134 (114.872, -15.1845)
  point P135 (119.2022, -15.0489)
  point P136 (123.5813, -14.8971)
  point P137 (128.006, -14.7306)
  point P138 (132.4718, -14.5509)
  point P139 (136.9748, -14.3598)
  point P140 (141.5285, -14.1576)
  point P141 (146.1365, -13.9383)
  point P142 (150.7679, -13.7022)
  point P143 (155.4191, -13.4499)
  point P144 (160.0853, -13.1829)
  point P145 (164.7617, -12.9024)
  point P146 (169.4444, -12.6099)
  point P147 (174.1283, -12.306)
  point P148 (178.8092, -11.9925)
  point P149 (183.4823, -11.67)
  point P150 (188.1434, -11.34)
  point P151 (192.7877, -11.0037)
  point P152 (197.4107, -10.6614)
  point P153 (202.0079, -10.3149)
  point P154 (206.5748, -9.9645)
  point P155 (211.1069, -9.6117)
  point P156 (215.6, -9.2568)
  point P157 (220.049, -8.9007)
  point P158 (224.4503, -8.5446)
  point P159 (228.7988, -8.1885)
  point P160 (233.0906, -7.8339)
  point P161 (237.3215, -7.4808)
  point P162 (241.4867, -7.1298)
  point P163 (245.5829, -6.7821)
  point P164 (249.6053, -6.4377)
  point P165 (253.5503, -6.0972)
  point P166 (257.4137, -5.7612)
  point P167 (261.1916, -5.4303)
  point P168 (264.8801, -5.1051)
  point P169 (268.4759, -4.7856)
  point P170 (271.9748, -4.4724)
  point P171 (275.3735, -4.1661)
  point P172 (278.6687, -3.867)
  point P173 (281.8565, -3.5757)
  point P174 (284.9345, -3.2925)
  point P175 (287.8985, -3.018)
  point P176 (290.7464, -2.7525)
  point P177 (293.4746, -2.4963)
  point P178 (296.0807, -2.2503)
  point P179 (298.5617, -2.0142)
  point P180 (300.9152, -1.7892)
  point P181 (303.1388, -1.575)
  point P182 (305.2301, -1.3728)
  point P183 (307.1867, -1.1823)
  point P184 (309.0071, -1.0041)
  point P185 (310.6886, -0.8385)
  point P186 (312.2303, -0.6861)
  point P187 (313.6298, -0.5472)
  point P188 (314.8862, -0.4221)
  point P189 (315.9977, -0.3108)
  point P190 (316.9637, -0.2139)
  point P191 (317.7827, -0.1314)
  point P192 (318.4538, -0.0636)
  point P193 (318.9767, -0.0108)
  point P194 (319.3505, 0.027)
  point P195 (319.5749, 0.0498)
  point P196 (28.0057, 1.0054)
  dimension "d2" = 300.0001
  dimension "d9" = 28
  dimension "d15" = 61
  dimension "d16" = 20.148
  dimension "d18" = 8.4
  dimension "d19" = 110
  dimension "d22" = 100
  dimension "d23" = 7
  dimension "d24" = 5
  dimension "d25" = 5
extrude "Extrusion5" add sketch "Sketch2" along normal blind 11.5 contours L10 L6 L8 L4 L9 L7 L11 S0 picked at (37.3485, 11.0408)
properties part number "2414 basic aerofoil" material "Polyurethane Foam"
